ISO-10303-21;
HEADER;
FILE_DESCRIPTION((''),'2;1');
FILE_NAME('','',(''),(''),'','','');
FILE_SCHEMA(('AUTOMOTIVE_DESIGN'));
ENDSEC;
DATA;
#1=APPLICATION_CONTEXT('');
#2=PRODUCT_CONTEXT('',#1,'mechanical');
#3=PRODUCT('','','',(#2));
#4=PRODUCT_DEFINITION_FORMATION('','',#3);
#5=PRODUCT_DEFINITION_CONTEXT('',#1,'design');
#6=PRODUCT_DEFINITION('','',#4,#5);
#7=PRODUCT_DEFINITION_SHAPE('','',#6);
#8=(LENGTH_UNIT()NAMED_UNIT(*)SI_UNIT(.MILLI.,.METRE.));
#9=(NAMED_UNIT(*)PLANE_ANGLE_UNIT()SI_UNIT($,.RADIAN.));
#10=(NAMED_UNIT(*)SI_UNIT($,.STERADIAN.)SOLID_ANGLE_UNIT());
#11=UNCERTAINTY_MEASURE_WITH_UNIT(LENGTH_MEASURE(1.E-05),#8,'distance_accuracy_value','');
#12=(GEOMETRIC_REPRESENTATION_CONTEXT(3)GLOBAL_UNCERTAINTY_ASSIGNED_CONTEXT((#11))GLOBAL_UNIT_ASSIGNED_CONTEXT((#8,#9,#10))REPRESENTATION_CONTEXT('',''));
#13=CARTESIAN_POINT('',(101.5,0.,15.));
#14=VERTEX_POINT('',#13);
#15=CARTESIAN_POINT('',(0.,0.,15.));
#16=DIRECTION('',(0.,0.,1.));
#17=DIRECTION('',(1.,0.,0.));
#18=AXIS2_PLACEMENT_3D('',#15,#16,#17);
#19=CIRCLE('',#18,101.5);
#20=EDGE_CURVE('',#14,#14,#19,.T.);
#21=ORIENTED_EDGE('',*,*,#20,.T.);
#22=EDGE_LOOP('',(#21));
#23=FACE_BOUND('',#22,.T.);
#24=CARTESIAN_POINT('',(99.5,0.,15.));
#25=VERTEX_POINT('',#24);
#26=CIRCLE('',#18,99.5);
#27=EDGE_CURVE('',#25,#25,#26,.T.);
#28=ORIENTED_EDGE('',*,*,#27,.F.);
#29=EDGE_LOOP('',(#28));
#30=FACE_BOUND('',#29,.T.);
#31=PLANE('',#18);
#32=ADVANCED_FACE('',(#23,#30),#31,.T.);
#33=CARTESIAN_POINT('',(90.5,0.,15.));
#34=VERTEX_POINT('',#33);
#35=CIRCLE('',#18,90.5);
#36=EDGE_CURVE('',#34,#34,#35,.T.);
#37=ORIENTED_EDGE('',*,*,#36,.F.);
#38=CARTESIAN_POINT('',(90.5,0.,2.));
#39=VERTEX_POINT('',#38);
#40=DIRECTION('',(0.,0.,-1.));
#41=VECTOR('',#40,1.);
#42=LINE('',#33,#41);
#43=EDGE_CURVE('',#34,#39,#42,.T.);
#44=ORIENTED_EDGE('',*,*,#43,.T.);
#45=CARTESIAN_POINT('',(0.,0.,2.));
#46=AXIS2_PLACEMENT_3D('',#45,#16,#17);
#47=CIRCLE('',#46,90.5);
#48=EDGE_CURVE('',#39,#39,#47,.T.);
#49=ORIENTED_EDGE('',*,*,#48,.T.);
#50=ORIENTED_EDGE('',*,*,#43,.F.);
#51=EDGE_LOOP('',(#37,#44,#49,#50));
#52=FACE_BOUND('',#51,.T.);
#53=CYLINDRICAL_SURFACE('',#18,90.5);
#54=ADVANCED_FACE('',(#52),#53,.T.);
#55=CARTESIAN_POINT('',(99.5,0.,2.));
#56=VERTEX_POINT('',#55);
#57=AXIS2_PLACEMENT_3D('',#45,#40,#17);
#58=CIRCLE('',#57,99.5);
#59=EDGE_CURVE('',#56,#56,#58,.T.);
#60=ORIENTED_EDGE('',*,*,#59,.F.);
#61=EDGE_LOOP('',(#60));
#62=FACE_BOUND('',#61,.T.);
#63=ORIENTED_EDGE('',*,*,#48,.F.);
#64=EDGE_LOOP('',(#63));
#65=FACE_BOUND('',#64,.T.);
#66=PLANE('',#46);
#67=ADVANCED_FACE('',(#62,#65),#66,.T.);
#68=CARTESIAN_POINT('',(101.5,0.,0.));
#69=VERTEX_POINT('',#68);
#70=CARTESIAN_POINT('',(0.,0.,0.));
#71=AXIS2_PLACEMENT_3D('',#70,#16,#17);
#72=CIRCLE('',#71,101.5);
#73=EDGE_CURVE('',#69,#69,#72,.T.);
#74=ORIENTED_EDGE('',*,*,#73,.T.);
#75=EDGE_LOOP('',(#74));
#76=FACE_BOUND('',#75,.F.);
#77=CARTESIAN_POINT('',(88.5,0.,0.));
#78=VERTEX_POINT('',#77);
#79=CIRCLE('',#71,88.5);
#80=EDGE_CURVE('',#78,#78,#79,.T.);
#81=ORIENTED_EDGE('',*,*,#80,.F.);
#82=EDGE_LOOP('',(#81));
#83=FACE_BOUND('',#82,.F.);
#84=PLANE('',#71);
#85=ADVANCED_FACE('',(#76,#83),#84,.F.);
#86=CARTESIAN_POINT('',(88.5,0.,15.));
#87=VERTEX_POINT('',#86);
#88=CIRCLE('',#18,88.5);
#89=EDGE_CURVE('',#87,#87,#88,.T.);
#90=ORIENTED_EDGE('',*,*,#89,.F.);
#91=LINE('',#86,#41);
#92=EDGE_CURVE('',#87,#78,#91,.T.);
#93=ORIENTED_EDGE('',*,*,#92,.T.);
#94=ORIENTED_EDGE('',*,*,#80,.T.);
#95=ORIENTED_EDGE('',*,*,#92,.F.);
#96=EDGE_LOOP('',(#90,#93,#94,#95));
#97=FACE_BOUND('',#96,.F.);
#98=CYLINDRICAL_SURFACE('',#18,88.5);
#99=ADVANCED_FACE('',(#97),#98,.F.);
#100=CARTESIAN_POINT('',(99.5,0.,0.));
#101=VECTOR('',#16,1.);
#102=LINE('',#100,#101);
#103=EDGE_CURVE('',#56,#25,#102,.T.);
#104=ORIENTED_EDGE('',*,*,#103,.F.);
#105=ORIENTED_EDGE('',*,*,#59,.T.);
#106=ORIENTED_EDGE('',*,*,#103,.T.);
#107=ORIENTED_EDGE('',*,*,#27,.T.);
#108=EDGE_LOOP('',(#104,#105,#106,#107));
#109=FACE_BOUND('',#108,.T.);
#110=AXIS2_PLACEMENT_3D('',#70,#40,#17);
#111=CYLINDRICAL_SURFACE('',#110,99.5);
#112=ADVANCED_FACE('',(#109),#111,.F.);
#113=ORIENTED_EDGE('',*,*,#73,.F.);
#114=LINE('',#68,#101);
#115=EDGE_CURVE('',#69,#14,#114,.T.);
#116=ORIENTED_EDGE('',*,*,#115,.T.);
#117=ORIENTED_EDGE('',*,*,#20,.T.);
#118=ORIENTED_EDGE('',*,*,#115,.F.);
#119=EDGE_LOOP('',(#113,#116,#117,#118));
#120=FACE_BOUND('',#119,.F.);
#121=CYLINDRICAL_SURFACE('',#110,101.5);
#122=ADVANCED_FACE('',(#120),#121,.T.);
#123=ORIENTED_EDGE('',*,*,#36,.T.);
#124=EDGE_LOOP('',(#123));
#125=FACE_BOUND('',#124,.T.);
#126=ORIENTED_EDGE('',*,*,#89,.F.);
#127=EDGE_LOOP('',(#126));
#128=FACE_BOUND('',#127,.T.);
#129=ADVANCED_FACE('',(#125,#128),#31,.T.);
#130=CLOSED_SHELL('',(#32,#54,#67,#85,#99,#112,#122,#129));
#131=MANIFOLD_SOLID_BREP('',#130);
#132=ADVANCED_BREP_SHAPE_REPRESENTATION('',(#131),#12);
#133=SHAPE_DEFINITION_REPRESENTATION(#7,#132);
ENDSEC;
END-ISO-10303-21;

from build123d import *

# Parameters (mm, degrees)
F0_R     = 101.5
F1_DEPTH = 15
F2_R     = 88.5
F3_DEPTH = 15.001
F4_T     = -2


# Not quite as in the source:
# - a feature names something its author has since deleted; it is built from what else it names


with BuildPart() as f1:
    # F0 (on Top) → F1 (new body)
    with BuildSketch(Plane.XY):
        Circle(F0_R)
    extrude(amount=F1_DEPTH)

    # F2 (on face) → F3 (cut, through all)
    with BuildSketch(Plane.XY.offset(15)):
        Circle(F2_R)
    extrude(amount=-F3_DEPTH, mode=Mode.SUBTRACT)

    # F4
    f4_openings = [f1.faces().sort_by_distance(p)[0] for p in [
        (-98.629146, 0, 15),
    ]]
    offset(amount=F4_T, openings=f4_openings)


solid = f1.part
